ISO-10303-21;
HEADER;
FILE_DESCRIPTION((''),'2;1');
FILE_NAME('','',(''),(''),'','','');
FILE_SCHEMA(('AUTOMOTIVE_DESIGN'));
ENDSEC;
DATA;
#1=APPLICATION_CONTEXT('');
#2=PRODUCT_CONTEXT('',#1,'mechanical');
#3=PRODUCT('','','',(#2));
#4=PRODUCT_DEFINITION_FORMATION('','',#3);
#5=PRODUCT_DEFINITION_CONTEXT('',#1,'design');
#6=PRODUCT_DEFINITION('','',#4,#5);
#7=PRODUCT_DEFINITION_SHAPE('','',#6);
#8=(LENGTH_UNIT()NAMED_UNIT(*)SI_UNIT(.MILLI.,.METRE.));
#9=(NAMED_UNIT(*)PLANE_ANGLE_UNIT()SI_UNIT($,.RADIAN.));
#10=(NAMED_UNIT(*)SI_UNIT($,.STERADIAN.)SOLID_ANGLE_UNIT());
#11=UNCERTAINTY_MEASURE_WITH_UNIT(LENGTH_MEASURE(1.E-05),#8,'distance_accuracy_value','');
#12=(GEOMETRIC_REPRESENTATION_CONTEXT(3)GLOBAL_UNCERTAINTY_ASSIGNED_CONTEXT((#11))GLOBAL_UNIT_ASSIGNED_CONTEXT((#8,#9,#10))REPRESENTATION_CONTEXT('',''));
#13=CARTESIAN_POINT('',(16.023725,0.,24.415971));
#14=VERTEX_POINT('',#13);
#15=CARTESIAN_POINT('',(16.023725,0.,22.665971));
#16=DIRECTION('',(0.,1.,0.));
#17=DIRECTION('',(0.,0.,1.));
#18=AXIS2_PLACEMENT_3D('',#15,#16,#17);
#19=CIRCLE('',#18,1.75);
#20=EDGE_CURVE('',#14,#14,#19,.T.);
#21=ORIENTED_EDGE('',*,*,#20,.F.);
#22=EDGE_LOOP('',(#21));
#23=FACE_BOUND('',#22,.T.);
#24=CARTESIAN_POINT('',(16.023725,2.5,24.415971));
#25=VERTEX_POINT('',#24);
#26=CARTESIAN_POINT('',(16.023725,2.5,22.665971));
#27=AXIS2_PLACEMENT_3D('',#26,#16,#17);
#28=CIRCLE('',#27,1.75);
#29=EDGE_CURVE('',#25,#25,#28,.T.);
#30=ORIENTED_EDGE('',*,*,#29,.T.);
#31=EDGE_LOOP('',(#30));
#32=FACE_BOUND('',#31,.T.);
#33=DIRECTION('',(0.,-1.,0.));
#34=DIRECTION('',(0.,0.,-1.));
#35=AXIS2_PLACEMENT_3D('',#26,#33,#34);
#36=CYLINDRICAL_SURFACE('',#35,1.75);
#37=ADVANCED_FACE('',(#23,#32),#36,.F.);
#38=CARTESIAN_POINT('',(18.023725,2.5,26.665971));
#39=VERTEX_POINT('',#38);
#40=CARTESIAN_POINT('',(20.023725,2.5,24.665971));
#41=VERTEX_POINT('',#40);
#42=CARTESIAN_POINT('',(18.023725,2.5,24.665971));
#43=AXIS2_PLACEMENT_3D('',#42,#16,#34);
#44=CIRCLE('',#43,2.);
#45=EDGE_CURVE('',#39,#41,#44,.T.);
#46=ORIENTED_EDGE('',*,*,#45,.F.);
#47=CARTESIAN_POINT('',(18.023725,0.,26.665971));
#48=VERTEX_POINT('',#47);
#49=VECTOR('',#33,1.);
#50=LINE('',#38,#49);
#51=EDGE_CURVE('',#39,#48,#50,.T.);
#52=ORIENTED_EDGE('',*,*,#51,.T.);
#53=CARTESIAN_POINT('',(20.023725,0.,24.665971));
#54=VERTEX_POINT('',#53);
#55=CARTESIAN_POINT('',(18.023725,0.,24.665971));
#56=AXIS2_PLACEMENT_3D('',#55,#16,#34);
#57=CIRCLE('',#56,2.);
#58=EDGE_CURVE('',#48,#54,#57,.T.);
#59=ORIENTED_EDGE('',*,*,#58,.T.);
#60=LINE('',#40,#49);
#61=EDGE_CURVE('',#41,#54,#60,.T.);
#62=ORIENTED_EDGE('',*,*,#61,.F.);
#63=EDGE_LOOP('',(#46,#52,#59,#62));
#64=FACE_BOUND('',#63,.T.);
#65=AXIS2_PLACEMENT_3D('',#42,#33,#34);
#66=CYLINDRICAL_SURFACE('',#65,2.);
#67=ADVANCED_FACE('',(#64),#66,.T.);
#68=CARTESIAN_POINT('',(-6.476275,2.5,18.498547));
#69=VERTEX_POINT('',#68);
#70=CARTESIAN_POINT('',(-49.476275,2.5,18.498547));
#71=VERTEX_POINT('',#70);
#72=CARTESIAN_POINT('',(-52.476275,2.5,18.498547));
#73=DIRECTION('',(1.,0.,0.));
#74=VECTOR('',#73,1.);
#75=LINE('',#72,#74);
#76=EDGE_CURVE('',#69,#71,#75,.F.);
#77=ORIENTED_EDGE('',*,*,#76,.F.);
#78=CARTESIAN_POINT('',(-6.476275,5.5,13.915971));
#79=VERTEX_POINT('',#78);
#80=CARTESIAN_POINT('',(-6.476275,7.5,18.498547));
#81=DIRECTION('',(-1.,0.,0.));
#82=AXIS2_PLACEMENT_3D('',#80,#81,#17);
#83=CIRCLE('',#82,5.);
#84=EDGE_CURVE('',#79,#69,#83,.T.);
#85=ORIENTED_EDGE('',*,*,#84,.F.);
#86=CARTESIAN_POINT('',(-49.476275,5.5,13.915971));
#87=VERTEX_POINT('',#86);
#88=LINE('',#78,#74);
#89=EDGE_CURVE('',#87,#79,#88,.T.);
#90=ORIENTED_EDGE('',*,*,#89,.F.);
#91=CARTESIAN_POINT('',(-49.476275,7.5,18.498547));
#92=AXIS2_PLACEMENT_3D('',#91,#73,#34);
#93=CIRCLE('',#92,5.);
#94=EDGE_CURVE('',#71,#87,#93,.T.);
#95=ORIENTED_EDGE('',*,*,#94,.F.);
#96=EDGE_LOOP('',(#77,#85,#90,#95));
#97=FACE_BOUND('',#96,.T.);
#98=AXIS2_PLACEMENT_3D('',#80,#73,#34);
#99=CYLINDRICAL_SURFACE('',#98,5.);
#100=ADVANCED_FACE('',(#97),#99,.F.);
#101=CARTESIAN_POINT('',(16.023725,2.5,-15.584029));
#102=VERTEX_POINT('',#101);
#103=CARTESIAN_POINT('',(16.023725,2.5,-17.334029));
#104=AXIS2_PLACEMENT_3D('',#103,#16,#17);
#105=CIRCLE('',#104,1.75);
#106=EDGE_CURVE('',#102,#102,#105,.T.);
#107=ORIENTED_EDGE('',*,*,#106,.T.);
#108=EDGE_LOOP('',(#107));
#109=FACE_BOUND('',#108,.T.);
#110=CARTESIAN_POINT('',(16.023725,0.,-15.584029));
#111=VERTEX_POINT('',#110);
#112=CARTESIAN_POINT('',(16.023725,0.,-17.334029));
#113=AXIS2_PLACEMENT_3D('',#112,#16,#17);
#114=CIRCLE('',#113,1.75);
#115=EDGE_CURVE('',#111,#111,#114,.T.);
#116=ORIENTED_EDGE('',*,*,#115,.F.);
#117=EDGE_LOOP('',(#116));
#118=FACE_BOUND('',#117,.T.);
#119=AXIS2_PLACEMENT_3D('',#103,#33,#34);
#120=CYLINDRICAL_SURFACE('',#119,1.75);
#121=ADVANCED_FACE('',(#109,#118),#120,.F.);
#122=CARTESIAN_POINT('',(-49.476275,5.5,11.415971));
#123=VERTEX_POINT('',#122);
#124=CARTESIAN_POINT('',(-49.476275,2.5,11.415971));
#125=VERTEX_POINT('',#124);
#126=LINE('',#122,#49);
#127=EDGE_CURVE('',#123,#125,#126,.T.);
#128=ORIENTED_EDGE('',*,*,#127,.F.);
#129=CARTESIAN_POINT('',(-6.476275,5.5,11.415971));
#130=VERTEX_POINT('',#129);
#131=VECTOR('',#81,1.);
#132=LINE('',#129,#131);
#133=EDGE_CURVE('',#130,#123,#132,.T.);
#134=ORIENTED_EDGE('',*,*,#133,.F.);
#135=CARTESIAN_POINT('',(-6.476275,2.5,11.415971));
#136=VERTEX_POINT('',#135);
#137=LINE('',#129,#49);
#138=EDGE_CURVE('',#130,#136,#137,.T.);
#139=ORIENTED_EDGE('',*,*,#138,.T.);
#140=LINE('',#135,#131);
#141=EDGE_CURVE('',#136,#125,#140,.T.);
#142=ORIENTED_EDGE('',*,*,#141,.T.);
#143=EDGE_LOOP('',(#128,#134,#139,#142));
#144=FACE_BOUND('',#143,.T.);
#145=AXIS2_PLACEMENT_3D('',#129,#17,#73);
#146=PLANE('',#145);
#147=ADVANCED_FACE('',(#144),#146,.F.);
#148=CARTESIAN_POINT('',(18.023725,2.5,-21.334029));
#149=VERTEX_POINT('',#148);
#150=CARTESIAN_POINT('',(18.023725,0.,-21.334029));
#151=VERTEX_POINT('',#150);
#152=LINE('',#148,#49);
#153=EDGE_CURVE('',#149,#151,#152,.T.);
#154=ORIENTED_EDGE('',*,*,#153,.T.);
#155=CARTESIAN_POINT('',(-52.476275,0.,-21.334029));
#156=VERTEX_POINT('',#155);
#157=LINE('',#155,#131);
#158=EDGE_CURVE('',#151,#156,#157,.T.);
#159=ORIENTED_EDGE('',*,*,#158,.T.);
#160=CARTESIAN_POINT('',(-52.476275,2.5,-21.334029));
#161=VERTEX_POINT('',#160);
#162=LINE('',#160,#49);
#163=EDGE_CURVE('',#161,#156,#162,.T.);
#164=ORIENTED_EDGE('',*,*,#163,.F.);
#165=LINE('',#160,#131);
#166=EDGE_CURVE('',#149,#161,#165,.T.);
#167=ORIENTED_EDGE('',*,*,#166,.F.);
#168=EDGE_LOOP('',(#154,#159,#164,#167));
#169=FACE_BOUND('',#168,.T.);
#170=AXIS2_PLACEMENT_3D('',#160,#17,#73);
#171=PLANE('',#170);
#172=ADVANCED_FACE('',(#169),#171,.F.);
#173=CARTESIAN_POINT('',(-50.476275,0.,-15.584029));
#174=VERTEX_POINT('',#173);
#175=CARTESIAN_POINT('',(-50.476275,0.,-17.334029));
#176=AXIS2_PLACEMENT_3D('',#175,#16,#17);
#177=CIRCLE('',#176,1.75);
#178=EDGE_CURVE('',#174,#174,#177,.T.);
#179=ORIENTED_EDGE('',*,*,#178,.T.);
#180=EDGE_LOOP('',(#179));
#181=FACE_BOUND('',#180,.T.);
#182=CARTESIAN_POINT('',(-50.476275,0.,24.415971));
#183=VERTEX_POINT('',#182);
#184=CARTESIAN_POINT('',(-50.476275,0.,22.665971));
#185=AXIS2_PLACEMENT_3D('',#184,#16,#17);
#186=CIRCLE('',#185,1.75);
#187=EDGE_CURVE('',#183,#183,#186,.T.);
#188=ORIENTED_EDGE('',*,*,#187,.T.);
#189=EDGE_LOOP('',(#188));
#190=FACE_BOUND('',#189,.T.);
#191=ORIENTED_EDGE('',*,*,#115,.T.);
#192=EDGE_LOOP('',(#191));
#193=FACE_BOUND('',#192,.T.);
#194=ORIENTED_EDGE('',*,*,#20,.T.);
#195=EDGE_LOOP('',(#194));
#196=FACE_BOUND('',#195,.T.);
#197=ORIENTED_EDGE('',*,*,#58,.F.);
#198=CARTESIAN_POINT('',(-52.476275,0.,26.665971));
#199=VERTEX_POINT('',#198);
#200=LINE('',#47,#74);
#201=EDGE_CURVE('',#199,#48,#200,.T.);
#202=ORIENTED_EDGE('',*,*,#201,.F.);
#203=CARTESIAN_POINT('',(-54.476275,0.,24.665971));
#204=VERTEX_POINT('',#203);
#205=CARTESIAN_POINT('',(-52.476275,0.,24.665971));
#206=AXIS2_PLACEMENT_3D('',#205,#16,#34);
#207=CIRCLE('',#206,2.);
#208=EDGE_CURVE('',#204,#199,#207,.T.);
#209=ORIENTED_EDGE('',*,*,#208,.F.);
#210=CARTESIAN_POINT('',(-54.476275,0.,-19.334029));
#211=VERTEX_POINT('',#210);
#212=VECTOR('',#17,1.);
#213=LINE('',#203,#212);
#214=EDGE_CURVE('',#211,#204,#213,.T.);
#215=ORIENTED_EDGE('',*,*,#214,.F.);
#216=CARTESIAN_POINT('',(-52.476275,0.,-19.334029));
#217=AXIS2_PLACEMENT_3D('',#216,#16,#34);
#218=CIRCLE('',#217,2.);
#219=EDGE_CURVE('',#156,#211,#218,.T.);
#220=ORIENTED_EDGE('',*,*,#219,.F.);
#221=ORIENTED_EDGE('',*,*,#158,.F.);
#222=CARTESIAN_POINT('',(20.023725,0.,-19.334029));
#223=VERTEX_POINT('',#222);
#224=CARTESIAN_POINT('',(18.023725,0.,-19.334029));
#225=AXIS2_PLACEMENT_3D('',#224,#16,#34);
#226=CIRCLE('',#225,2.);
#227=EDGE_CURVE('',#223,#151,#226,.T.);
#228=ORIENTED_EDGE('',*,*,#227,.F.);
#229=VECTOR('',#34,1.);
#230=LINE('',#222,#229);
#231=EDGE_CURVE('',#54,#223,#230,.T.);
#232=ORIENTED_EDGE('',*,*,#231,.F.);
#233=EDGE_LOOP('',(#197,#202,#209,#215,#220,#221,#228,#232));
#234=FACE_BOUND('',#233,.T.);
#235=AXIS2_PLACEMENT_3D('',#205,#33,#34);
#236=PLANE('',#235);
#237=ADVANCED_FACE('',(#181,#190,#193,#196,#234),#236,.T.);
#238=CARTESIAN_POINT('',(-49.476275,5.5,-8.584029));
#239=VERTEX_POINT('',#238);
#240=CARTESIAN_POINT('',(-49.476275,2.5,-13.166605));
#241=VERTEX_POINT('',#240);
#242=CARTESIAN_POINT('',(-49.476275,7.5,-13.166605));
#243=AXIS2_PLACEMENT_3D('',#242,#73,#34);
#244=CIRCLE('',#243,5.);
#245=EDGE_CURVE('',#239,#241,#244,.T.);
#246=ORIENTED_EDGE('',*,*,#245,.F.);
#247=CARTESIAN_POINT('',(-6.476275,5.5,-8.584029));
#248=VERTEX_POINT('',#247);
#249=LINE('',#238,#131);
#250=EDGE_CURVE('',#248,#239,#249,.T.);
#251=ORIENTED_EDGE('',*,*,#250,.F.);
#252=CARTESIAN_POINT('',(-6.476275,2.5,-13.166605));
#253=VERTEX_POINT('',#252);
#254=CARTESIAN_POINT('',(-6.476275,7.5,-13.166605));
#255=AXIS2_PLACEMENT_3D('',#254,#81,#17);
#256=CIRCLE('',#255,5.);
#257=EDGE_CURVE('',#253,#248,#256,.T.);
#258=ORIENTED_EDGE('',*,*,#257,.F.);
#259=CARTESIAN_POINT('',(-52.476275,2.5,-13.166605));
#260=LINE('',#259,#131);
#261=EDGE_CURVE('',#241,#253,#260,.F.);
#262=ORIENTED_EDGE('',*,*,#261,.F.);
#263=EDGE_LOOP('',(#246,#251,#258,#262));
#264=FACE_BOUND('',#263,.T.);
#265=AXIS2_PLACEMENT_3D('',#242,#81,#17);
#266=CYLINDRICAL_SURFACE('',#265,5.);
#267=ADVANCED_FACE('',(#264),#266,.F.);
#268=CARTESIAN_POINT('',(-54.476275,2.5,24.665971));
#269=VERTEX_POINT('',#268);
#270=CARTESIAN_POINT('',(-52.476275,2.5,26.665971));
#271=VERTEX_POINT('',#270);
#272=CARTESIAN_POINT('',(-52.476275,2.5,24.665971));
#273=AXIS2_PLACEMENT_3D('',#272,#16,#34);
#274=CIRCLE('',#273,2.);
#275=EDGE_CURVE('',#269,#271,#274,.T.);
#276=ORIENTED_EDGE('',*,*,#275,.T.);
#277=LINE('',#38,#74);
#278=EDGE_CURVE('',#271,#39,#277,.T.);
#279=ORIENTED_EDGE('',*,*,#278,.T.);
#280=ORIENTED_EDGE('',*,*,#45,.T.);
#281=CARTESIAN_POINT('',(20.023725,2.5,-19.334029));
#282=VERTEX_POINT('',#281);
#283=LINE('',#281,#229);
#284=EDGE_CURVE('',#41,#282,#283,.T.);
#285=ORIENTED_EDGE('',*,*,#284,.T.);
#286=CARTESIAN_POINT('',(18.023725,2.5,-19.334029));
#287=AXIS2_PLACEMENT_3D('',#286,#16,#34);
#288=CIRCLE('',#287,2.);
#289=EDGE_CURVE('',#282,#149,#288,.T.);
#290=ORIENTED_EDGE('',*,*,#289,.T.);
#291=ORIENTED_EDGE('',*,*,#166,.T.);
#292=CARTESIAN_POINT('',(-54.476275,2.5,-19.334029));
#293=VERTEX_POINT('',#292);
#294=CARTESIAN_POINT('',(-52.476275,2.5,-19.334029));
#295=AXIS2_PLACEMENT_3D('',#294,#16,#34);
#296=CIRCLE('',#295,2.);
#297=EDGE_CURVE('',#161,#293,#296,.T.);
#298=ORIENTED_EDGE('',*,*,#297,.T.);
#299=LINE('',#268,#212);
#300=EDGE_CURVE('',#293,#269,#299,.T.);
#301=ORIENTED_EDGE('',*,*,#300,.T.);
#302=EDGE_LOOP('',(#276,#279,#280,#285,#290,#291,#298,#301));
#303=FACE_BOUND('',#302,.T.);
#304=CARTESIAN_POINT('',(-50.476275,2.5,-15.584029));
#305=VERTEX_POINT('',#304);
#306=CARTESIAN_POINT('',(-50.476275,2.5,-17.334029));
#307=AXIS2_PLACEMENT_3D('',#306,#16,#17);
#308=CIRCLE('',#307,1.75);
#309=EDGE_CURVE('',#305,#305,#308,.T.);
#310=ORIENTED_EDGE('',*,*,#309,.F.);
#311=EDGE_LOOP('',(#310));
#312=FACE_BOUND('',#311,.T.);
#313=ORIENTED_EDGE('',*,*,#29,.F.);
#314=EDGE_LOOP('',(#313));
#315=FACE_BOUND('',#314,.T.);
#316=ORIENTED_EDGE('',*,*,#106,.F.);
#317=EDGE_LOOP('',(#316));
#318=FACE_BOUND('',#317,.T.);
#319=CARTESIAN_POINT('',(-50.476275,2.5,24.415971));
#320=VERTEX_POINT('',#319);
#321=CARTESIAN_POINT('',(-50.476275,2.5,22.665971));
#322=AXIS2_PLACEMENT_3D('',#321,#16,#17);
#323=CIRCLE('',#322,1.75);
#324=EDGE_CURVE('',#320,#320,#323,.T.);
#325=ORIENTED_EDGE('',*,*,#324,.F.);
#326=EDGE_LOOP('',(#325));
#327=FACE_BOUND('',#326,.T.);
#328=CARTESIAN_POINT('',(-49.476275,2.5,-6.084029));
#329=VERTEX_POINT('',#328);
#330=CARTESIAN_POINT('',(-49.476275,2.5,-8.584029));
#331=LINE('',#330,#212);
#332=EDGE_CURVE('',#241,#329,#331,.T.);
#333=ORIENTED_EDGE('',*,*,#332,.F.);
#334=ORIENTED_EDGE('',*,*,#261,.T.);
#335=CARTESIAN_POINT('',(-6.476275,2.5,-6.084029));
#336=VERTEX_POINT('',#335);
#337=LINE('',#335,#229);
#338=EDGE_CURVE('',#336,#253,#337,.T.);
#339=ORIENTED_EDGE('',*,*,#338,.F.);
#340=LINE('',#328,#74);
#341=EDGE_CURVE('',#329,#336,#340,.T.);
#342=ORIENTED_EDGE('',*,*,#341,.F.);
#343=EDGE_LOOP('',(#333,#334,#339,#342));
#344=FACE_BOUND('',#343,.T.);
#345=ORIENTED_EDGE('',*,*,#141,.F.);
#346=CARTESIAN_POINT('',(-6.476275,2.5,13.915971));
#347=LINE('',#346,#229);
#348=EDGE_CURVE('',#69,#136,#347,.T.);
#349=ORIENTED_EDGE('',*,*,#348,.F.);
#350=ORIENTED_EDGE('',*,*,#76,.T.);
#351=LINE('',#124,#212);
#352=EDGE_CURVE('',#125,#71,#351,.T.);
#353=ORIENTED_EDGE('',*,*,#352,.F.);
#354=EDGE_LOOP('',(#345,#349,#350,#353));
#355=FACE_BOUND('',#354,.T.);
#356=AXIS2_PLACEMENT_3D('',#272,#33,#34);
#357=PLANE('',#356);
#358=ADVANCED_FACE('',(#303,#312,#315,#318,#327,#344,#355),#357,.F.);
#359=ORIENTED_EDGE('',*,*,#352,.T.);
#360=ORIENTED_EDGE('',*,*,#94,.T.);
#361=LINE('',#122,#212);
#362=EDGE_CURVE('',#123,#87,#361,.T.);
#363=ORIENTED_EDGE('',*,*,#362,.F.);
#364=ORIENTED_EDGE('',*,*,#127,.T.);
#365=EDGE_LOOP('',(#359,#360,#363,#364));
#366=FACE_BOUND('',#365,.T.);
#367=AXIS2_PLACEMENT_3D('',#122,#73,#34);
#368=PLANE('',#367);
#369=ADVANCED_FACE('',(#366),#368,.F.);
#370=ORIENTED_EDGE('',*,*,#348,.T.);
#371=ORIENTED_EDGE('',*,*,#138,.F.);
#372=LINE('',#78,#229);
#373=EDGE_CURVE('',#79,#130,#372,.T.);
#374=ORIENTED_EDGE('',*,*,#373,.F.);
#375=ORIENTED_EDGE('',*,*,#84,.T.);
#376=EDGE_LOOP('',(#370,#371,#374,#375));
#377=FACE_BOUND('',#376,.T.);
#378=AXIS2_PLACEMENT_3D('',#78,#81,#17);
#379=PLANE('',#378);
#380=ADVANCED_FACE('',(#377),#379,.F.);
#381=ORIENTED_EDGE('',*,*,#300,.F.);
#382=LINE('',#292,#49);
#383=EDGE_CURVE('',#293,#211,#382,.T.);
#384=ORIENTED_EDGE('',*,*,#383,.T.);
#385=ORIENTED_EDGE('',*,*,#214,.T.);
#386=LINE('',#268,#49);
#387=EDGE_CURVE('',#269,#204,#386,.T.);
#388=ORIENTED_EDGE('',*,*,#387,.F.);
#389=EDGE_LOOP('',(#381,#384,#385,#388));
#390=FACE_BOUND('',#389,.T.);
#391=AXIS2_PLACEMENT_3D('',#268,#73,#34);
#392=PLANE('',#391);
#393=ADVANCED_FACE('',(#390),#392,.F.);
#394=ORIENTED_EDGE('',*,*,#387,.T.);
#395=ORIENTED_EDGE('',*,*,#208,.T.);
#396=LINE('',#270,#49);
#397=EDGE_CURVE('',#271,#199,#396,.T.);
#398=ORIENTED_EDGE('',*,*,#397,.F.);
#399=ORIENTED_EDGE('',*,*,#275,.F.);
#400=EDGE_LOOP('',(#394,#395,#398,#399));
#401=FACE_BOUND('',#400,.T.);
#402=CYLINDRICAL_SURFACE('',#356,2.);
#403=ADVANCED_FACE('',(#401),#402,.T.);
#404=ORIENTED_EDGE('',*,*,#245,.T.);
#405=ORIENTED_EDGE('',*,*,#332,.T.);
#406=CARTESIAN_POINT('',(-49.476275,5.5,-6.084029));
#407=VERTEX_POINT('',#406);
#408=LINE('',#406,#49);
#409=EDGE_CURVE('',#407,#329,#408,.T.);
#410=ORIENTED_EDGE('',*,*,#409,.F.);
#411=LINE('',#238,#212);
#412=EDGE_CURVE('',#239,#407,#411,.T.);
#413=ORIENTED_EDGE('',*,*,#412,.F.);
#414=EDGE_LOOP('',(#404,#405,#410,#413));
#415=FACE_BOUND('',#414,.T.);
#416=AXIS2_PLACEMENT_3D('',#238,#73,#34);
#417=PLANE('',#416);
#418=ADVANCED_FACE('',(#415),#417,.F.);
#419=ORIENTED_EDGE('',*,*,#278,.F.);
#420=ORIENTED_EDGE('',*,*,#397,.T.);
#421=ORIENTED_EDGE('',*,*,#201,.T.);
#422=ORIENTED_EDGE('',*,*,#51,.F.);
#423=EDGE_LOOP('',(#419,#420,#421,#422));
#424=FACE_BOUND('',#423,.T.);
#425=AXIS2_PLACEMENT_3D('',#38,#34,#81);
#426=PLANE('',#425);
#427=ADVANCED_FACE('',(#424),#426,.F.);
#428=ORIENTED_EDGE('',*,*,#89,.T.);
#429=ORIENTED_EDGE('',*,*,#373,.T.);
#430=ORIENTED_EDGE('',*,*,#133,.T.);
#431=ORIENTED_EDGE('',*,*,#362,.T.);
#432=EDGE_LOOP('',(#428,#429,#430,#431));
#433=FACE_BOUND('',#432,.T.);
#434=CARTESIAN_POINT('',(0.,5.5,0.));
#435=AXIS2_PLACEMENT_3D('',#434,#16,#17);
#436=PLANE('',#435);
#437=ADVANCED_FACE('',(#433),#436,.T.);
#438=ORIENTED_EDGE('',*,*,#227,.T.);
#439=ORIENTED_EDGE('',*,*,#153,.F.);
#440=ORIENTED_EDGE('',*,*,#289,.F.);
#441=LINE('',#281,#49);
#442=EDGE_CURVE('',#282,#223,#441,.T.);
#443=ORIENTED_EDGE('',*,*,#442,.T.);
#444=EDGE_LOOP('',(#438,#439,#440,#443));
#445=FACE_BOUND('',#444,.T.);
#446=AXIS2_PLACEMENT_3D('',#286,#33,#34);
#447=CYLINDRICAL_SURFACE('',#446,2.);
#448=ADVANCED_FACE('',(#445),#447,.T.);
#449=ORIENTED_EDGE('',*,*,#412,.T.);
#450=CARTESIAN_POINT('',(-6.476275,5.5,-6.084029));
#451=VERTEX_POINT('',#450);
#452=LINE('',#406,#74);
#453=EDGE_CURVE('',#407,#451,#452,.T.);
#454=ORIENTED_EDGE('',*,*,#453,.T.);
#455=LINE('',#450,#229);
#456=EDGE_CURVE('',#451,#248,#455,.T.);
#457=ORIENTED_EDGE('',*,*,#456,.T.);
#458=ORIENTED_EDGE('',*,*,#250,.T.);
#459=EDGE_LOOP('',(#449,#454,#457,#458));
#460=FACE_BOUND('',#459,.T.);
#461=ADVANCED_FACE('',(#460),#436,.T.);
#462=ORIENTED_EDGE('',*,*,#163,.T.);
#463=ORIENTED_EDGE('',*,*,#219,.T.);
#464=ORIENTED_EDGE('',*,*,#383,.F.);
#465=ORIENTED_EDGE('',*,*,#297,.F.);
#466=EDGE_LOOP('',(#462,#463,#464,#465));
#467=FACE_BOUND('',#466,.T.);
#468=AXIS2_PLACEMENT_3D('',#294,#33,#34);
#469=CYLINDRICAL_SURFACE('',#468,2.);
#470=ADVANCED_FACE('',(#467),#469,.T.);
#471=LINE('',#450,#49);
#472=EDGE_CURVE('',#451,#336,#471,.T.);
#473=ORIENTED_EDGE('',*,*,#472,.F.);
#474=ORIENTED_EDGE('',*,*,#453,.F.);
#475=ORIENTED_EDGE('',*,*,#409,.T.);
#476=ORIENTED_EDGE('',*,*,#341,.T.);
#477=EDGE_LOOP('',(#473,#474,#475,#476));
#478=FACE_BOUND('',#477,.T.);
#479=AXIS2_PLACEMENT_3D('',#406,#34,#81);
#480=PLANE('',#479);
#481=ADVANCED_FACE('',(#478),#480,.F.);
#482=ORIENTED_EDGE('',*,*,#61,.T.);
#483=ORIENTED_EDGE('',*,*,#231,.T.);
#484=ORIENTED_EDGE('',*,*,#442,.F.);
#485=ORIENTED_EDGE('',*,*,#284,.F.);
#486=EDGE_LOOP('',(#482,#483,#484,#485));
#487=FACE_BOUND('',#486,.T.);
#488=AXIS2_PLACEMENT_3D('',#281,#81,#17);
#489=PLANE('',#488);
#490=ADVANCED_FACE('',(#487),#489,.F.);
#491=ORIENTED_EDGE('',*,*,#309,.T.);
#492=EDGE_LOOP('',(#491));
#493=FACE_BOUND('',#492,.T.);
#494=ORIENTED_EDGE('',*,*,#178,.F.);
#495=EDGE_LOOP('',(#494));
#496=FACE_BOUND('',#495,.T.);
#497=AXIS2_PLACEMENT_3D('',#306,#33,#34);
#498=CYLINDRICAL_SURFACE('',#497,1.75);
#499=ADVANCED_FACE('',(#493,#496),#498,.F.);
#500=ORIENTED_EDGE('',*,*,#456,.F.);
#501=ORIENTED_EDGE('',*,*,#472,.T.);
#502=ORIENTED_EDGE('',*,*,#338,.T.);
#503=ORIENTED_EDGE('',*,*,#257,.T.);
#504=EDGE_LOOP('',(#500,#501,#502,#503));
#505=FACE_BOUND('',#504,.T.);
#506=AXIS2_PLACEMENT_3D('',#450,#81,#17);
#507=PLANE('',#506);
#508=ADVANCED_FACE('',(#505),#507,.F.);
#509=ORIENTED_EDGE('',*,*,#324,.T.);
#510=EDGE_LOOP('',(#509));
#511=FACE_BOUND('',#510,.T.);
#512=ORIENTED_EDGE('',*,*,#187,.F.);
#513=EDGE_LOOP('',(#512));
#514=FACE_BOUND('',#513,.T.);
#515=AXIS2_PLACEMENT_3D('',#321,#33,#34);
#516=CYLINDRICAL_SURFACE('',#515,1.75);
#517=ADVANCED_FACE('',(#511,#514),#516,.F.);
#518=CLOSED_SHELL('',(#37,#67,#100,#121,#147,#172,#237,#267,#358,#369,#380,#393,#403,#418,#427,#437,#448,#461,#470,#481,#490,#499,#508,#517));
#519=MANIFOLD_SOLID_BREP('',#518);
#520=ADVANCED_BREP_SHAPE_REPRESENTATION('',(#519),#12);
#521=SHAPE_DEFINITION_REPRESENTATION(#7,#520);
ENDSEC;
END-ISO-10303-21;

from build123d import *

# Parameters (mm, degrees)
SKETCH1_R           = 1.75
BOSS_EXTRUDE1_DEPTH = 2.5
SKETCH2_W           = 43
SKETCH2_H           = 2.5
BOSS_EXTRUDE2_DEPTH = 3
FILLET1_R           = 5


with BuildPart() as part:
    # Sketch1 → Boss-Extrude1 (new body)
    with BuildSketch(Plane(origin=(0, 0, 0), x_dir=(1, 0, 0), z_dir=(0, 1, 0))):
        with BuildLine():
            Line((-52.476274799, 21.3340289), (18.023725201, 21.3340289))
            ThreePointArc((18.023725201, 21.3340289), (19.437938764, 20.748242463), (20.023725201, 19.3340289))
            Line((20.023725201, 19.3340289), (20.023725201, -24.6659711))
            ThreePointArc((20.023725201, -24.6659711), (19.437938764, -26.080184662), (18.023725201, -26.6659711))
            Line((18.023725201, -26.6659711), (-52.476274799, -26.6659711))
            ThreePointArc((-52.476274799, -26.6659711), (-53.890488361, -26.080184662), (-54.476274799, -24.6659711))
            Line((-54.476274799, -24.6659711), (-54.476274799, 19.3340289))
            ThreePointArc((-54.476274799, 19.3340289), (-53.890488361, 20.748242463), (-52.476274799, 21.3340289))
        make_face()
        with Locations(Location((-50.476274799, 17.3340289, 0), (0, 0, 270))):
            Circle(SKETCH1_R, mode=Mode.SUBTRACT)
        with Locations(Location((16.023725201, 17.3340289, 0), (0, 0, 270))):
            Circle(SKETCH1_R, mode=Mode.SUBTRACT)
        with Locations(Location((16.023725201, -22.6659711, 0), (0, 0, 270))):
            Circle(SKETCH1_R, mode=Mode.SUBTRACT)
        with Locations(Location((-50.476274799, -22.6659711, 0), (0, 0, 270))):
            Circle(SKETCH1_R, mode=Mode.SUBTRACT)
    extrude(amount=BOSS_EXTRUDE1_DEPTH)

    # Sketch2 → Boss-Extrude2 (add)
    with BuildSketch(Plane(origin=(0, 2.5, 0), x_dir=(1, 0, 0), z_dir=(0, 1, 0))):
        with Locations((-27.976274799, 7.3340289)):
            Rectangle(SKETCH2_W, SKETCH2_H)
        with Locations((-27.976274799, -12.6659711)):
            Rectangle(SKETCH2_W, SKETCH2_H)
    extrude(amount=BOSS_EXTRUDE2_DEPTH)

    # Fillet1
    # the kernel refuses this fillet: 5 mm, written as the material it adds along each edge
    with BuildSketch(Plane(origin=(-49.476274799, 2.5, -8.5840289), x_dir=(0, 0, -1), z_dir=(1, 0, 0)), Plane(origin=(-6.476274799, 2.5, 13.9159711), x_dir=(0, 0, 1), z_dir=(-1, 0, 0))) as fillet1_piece_1:
        with BuildLine():
            CenterArc((4.582575695, 5), FILLET1_R, 203.578178478, 66.421821522)
            Line((0, 3), (-0.091651514, 2.96))
            ThreePointArc((-0.091651514, 2.96), (-0.1, 1.5), (-0.1, 0))
            Line((-0.1, 0), (0, -0.1))
            Line((0, -0.1), (4.582575695, -0.1))
            Line((4.582575695, -0.1), (4.582575695, 0))
        make_face()
    extrude(amount=43)


solid = part.part
